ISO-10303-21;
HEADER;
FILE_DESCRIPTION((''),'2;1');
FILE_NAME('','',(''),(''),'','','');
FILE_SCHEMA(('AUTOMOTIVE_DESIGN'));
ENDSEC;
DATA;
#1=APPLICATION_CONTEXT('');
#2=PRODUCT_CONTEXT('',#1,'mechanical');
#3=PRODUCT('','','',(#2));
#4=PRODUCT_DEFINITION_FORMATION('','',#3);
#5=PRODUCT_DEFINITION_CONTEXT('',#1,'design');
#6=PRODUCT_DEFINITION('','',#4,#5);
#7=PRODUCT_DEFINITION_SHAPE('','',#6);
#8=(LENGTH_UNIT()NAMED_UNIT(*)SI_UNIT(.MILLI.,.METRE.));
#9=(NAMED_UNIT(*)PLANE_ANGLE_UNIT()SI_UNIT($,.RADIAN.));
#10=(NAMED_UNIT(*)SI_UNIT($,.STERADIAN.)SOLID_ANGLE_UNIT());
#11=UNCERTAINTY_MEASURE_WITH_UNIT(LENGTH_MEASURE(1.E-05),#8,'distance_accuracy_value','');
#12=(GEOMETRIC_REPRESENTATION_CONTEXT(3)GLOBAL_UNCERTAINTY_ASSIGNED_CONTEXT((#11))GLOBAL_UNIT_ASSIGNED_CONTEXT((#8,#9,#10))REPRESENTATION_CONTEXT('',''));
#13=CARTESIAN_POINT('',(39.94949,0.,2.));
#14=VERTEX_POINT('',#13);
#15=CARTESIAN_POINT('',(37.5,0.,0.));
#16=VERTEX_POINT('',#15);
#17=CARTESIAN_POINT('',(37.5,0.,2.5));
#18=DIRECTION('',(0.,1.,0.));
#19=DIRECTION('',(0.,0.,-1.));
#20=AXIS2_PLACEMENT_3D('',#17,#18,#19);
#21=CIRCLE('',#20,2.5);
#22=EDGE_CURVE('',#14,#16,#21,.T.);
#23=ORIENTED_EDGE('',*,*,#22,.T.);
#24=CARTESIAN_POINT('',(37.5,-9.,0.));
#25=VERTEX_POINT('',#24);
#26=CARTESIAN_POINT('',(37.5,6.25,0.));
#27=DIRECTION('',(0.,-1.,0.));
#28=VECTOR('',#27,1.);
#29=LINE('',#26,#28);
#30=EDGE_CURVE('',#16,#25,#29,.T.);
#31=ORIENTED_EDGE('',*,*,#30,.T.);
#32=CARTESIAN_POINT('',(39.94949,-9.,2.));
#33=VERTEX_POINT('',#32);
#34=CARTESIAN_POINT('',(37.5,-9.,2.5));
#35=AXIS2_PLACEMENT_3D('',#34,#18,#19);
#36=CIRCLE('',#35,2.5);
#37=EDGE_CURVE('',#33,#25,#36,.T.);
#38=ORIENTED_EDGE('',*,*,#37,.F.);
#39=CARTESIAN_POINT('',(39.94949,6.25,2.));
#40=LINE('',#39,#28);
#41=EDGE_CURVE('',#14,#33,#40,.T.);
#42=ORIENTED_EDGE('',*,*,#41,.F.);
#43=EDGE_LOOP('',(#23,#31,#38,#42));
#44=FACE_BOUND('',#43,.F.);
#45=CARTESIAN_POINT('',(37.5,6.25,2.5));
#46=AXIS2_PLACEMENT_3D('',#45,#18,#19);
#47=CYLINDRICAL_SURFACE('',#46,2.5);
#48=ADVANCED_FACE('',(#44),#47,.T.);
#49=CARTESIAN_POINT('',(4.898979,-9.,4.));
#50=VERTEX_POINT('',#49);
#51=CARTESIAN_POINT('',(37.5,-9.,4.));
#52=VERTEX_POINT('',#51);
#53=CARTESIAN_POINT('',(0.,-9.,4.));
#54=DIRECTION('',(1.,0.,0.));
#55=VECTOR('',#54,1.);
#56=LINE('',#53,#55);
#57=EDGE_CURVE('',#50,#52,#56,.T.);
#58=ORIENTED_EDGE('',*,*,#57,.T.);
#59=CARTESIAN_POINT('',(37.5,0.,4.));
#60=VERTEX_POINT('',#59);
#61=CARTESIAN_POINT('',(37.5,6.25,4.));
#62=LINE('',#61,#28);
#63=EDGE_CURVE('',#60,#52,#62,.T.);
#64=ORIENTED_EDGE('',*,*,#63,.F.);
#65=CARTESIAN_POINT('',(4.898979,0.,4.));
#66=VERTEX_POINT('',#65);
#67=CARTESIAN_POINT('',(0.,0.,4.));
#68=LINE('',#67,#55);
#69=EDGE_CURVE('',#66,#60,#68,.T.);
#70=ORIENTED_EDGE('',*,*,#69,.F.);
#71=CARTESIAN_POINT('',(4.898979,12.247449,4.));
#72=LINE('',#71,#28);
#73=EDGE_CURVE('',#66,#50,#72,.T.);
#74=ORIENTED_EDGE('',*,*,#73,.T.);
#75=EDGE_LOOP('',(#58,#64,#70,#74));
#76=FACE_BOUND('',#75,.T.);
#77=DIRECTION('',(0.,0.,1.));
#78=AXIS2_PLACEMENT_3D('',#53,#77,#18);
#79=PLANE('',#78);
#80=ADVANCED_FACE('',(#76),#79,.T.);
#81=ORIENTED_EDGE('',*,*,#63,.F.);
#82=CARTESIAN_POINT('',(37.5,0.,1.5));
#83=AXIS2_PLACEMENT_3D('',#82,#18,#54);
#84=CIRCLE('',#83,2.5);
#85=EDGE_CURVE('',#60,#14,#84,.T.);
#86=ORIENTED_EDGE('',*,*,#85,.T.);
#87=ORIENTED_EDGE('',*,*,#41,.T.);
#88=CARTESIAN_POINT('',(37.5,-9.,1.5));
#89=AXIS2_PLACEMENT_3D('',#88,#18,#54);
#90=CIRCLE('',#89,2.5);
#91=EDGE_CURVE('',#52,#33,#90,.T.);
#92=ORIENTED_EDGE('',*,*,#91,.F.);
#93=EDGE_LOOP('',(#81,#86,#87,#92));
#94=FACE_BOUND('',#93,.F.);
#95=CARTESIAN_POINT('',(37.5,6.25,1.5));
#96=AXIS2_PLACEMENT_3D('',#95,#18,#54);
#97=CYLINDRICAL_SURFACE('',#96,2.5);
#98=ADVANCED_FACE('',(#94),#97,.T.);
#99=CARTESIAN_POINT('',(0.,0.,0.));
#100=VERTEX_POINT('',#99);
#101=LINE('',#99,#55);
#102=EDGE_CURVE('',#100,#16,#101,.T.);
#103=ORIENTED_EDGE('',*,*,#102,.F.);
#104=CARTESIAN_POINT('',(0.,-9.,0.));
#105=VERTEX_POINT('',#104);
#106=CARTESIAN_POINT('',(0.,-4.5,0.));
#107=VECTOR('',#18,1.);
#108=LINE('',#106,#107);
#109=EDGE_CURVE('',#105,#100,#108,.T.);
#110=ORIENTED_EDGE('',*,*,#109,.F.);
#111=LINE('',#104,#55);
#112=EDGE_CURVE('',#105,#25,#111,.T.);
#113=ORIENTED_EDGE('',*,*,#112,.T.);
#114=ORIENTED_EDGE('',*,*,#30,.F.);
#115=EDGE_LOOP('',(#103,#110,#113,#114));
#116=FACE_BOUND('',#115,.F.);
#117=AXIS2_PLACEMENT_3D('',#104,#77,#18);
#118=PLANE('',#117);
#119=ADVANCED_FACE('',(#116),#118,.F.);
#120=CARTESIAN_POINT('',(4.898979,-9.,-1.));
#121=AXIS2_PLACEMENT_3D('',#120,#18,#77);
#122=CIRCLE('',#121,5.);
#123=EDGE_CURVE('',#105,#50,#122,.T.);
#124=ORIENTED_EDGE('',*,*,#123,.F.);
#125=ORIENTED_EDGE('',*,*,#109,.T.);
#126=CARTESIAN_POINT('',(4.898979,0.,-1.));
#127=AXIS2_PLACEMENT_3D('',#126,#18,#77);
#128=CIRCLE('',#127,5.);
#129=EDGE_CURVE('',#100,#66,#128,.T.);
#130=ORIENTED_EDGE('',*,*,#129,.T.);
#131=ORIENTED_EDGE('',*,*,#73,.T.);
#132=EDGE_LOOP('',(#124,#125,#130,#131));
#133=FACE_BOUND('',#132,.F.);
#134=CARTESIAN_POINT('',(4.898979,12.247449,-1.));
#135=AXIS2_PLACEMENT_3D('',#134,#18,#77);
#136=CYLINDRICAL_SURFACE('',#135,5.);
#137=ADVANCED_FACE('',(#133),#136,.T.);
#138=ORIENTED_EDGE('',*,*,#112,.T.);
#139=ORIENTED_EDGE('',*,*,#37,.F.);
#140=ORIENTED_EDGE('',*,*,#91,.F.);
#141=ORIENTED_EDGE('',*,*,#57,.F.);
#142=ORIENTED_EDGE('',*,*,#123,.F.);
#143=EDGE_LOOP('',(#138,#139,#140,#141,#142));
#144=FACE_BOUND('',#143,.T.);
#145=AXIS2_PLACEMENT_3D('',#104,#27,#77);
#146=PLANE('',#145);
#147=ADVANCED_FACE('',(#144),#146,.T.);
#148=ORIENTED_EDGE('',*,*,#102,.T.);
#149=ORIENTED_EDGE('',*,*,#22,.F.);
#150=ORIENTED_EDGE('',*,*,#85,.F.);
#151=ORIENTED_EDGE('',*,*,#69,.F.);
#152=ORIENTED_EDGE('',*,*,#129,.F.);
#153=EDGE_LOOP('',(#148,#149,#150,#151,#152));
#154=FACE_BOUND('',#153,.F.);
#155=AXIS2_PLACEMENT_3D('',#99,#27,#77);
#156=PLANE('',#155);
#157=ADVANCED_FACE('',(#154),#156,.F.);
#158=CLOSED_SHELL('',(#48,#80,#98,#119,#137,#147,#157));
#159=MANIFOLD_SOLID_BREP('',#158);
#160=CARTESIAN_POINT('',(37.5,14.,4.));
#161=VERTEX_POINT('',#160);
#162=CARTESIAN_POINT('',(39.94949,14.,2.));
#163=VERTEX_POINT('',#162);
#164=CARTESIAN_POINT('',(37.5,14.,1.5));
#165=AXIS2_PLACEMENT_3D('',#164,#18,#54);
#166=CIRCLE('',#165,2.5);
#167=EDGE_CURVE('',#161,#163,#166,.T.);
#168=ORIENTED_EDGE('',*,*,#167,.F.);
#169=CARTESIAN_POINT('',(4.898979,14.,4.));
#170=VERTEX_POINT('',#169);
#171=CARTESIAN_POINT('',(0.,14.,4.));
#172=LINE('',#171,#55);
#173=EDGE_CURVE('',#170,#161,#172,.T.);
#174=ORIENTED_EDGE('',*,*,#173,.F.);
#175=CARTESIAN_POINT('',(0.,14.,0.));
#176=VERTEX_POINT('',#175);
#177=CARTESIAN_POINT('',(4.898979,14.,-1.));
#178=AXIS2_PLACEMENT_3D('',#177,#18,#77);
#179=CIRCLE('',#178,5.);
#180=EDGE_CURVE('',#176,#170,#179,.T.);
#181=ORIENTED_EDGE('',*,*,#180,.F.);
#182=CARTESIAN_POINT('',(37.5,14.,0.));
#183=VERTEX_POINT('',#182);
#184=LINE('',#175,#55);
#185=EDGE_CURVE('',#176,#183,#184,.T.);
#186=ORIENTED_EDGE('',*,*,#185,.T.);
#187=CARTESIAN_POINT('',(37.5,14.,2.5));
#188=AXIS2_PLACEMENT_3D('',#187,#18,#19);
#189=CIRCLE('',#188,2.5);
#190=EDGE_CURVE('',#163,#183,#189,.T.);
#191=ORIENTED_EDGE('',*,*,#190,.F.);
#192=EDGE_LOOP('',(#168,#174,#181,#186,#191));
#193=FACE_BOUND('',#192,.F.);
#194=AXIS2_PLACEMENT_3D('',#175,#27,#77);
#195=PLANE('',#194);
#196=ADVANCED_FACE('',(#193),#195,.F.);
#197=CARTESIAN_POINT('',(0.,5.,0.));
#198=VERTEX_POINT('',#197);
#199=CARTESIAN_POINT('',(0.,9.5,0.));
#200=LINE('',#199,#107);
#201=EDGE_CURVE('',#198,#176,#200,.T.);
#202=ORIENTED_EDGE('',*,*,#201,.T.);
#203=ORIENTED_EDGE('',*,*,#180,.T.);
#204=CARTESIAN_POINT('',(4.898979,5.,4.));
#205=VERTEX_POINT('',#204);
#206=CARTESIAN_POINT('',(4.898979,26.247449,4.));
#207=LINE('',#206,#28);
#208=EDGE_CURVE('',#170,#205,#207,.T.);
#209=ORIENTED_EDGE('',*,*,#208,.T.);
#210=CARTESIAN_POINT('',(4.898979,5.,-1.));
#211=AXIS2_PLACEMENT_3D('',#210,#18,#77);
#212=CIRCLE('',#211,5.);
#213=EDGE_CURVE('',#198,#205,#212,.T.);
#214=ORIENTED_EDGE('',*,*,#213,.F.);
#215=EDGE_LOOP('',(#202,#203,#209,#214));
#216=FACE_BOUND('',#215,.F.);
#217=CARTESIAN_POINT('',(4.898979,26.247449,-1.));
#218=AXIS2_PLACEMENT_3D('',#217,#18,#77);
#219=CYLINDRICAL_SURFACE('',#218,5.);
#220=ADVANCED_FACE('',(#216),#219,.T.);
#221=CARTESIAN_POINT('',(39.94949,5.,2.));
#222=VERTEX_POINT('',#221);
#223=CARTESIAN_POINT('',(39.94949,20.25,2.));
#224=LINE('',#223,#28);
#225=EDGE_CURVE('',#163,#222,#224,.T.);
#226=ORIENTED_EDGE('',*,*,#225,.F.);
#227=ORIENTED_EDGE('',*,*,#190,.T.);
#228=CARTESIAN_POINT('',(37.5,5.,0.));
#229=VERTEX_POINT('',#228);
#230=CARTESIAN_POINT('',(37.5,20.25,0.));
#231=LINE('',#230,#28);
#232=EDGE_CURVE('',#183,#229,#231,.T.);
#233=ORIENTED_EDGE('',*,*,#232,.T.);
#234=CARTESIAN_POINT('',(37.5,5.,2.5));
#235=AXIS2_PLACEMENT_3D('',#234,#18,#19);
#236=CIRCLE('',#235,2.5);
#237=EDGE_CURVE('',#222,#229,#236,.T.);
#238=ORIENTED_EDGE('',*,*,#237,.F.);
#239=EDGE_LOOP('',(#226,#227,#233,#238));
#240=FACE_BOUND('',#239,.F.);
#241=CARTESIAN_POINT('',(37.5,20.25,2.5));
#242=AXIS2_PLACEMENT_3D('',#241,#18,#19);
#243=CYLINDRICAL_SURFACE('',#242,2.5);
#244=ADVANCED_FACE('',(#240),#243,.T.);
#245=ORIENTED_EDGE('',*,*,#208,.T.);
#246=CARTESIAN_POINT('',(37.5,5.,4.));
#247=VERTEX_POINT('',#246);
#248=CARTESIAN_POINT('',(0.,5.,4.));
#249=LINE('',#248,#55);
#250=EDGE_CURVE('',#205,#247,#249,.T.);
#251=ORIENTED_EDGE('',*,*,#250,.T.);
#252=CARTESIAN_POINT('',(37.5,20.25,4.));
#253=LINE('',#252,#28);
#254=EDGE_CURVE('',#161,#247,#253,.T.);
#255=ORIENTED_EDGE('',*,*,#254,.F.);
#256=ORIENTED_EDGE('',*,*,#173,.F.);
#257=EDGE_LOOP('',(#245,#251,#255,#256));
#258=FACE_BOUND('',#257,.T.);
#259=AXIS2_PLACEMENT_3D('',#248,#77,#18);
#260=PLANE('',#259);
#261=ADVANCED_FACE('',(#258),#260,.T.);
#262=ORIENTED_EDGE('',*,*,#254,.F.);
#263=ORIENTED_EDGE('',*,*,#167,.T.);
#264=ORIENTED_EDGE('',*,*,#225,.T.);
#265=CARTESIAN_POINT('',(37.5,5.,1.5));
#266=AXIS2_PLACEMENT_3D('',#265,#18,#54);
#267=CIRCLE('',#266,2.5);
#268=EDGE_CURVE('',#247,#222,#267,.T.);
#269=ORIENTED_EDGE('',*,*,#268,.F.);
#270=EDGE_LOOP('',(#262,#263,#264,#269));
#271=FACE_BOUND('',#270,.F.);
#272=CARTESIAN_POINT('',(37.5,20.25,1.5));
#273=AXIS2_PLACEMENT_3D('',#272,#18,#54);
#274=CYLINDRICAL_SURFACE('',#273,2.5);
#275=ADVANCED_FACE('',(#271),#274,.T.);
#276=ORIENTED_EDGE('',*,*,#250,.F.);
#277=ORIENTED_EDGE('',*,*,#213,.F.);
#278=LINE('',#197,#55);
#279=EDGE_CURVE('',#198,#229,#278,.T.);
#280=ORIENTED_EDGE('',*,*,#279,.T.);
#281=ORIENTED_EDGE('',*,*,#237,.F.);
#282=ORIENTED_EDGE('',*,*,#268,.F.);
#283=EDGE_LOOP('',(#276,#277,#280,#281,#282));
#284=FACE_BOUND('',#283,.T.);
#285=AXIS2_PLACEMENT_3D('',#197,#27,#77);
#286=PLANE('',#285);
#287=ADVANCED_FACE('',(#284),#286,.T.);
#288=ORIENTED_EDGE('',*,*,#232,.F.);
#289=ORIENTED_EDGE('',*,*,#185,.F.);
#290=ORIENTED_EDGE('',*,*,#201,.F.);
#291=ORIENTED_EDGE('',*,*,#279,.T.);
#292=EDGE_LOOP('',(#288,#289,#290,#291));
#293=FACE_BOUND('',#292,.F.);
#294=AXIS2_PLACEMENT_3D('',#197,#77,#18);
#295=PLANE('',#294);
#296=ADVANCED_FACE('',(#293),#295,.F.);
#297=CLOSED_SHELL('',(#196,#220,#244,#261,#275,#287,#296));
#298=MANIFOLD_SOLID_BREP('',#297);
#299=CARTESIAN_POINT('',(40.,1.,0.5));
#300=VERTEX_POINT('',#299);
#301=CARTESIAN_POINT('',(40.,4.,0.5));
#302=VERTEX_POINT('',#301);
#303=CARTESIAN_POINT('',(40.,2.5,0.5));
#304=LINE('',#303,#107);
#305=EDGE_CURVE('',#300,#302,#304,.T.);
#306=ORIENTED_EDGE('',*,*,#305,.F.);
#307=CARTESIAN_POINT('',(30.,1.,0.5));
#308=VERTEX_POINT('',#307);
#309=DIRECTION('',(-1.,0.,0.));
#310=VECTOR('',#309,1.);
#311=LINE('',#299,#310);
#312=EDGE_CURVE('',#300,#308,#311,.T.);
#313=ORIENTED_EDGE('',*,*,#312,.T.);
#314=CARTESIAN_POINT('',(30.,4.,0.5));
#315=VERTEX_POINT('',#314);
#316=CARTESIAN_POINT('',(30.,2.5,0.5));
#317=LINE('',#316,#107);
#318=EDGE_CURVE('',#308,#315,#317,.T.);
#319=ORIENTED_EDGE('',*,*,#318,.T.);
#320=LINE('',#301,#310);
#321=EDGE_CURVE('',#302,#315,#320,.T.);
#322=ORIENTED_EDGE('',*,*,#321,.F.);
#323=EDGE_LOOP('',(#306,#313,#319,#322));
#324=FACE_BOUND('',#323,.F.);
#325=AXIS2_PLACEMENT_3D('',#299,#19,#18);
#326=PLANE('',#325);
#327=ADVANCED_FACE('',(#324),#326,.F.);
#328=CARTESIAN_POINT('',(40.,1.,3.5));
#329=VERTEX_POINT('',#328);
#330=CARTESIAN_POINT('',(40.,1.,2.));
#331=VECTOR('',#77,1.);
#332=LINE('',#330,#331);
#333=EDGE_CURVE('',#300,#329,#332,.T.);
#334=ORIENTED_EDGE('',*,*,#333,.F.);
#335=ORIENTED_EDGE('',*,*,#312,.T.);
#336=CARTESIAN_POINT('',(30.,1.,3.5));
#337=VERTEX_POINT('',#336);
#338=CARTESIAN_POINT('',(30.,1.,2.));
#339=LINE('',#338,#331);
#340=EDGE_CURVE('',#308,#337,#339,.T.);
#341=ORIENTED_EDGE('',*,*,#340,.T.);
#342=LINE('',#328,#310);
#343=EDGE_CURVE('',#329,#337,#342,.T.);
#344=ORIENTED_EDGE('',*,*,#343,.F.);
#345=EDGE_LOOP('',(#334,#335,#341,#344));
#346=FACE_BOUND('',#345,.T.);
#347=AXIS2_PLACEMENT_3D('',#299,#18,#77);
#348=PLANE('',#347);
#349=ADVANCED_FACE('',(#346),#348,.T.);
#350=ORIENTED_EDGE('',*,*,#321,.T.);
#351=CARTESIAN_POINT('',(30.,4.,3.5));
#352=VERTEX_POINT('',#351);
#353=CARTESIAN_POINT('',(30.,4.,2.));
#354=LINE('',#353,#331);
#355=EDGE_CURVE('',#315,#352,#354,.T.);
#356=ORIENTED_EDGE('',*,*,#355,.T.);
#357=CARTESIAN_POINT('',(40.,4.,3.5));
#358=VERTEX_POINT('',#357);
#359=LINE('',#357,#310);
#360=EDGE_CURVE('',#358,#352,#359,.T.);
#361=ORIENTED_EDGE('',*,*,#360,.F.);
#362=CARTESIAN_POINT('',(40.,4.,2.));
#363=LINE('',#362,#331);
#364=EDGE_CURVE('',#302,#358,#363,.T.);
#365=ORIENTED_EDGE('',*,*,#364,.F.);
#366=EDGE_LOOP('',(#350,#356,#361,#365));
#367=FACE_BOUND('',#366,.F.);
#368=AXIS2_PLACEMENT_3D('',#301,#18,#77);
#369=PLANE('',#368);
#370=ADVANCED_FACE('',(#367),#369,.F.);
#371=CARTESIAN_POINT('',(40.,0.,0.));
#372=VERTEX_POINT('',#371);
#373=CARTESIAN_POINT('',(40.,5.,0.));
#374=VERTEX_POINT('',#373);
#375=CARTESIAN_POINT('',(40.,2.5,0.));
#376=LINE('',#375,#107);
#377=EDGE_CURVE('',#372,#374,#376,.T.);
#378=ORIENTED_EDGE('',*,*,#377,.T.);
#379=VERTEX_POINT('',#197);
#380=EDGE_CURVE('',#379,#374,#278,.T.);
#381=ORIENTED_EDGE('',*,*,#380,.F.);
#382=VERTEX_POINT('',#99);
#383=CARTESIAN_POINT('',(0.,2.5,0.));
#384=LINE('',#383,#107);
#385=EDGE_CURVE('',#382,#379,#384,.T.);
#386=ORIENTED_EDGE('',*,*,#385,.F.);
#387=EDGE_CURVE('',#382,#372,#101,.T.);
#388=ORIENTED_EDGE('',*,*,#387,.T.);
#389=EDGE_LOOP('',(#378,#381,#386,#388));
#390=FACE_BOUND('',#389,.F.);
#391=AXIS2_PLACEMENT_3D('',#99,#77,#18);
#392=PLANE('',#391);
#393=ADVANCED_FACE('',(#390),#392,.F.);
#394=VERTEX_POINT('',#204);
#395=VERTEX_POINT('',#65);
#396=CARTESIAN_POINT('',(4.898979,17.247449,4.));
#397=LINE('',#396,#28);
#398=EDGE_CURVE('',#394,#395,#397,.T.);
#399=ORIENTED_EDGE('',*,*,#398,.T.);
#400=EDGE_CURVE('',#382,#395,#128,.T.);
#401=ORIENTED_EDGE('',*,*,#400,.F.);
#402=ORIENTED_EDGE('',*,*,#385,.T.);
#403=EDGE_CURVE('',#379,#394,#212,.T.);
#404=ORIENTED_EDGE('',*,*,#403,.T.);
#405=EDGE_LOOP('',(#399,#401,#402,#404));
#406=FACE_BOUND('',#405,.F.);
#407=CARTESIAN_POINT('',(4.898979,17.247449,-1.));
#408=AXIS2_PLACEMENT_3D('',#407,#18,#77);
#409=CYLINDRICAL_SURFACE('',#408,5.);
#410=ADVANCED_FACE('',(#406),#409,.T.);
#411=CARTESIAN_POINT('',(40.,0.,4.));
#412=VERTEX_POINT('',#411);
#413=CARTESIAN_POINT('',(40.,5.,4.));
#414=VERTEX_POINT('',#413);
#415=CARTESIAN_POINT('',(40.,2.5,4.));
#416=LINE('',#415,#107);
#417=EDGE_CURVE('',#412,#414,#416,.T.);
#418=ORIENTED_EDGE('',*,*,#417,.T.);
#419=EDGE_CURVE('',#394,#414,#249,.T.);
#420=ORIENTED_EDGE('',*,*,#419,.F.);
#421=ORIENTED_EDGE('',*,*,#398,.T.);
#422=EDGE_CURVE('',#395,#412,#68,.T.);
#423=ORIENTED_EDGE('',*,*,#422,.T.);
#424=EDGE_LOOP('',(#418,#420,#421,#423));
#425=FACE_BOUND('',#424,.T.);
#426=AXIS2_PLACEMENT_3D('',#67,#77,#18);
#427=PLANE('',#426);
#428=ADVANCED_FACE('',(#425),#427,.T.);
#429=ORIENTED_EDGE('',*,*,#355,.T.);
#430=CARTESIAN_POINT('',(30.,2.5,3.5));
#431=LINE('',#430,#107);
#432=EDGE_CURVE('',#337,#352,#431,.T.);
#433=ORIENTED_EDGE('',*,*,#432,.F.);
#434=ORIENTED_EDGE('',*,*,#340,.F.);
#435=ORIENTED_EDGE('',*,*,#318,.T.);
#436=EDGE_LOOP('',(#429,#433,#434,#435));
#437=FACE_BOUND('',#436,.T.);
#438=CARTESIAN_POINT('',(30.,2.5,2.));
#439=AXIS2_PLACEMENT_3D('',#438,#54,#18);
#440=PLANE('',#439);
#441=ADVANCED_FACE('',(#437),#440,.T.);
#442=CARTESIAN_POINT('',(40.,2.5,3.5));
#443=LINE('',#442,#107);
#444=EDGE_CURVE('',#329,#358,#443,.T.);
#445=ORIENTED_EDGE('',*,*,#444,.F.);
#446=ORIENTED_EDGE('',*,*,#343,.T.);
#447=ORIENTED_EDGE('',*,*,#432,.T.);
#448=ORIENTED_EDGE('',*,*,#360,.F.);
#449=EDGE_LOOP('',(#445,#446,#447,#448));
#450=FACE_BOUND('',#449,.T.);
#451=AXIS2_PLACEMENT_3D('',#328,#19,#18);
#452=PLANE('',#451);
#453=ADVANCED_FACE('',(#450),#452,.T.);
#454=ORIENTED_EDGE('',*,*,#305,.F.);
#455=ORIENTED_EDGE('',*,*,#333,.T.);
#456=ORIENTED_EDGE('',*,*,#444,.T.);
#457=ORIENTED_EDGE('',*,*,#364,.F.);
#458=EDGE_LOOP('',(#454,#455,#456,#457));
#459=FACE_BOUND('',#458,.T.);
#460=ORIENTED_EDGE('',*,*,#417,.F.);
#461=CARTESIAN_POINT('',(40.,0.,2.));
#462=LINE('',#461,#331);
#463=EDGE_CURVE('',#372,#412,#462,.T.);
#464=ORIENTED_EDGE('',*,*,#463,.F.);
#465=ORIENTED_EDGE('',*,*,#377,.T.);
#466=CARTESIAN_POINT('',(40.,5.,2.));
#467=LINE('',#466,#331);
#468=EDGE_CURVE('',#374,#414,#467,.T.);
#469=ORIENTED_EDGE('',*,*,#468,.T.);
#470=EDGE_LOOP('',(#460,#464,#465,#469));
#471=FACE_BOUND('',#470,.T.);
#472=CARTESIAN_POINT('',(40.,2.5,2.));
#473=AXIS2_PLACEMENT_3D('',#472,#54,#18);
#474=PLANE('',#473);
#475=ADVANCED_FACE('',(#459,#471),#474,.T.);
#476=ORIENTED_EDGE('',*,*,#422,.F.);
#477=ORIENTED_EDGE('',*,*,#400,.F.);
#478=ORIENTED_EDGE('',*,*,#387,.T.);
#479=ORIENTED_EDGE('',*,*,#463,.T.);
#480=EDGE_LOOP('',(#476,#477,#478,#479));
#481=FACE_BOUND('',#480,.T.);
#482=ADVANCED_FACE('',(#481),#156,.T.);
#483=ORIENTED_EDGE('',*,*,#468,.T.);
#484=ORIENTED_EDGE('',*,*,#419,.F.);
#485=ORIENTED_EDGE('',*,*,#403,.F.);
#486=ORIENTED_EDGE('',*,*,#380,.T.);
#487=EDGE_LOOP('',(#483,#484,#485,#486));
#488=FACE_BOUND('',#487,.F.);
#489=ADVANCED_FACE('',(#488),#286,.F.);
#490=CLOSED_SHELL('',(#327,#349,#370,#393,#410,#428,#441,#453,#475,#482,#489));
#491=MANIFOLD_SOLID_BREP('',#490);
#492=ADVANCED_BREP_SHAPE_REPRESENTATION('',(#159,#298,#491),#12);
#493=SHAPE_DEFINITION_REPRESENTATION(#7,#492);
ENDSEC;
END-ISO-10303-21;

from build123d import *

# Parameters (mm, degrees)
F0_W          = 9
F0_H          = 4
F1_DEPTH      = 40
F0_W_2        = 5
F2_DEPTH      = 40
F3_W          = 3
F3_H          = 3
F4_DEPTH      = 10
F5_T1_DEPTH   = 33.4948974279
F5_2_T1_DEPTH = 33.4948974279
F5_3_T1_DEPTH = 29.4948974279
F6_T1_DEPTH   = 21.5
F6_2_T1_DEPTH = 21.5


# Not quite as in the source:
# - a fillet or chamfer that OpenCascade refuses, or shapes differently, is made with other operations: its cross-section is extruded or revolved along the edge and cut away or added


with BuildPart() as f1:
    # F0 (on Right) → F1 (new body)
    with BuildSketch(Plane.YZ):
        with Locations((-4.5, 2)):
            Rectangle(F0_W, F0_H)
    extrude(amount=F1_DEPTH)

    # F5: fillet of radius 5 on 1 edges, made by hand

    # F5_s2 → F5_t1 (cut)
    with BuildSketch(Plane.XZ.offset(-12.2474487139)):
        with BuildLine():
            ThreePointArc((4.8989794856, 4), (1.7367018254, 2.8729833462), (0, 0))
            Line((0, 0), (0, 4))
            Line((0, 4), (4.8989794856, 4))
        make_face()
    extrude(amount=F5_T1_DEPTH, mode=Mode.SUBTRACT)

    # F6: fillet of radius 2.5 on 2 edges, made by hand

    # F6_s2 → F6_t1 (cut)
    with BuildSketch(Plane.XZ.offset(-6.25)):
        with BuildLine():
            ThreePointArc((40, 1.5), (39.267766953, 3.267766953), (37.5, 4))
            Line((37.5, 4), (40, 4))
            Line((40, 4), (40, 1.5))
        make_face()
        with BuildLine():
            ThreePointArc((37.5, 0), (39.267766953, 0.732233047), (40, 2.5))
            Line((40, 2.5), (40, 0))
            Line((40, 0), (37.5, 0))
        make_face()
    extrude(amount=F6_T1_DEPTH, mode=Mode.SUBTRACT)


with BuildPart() as f1b:
    # F0 (on Right) → F1, piece 2 (new body)
    with BuildSketch(Plane.YZ):
        with Locations((9.5, 2)):
            Rectangle(F0_W, F0_H)
    extrude(amount=F1_DEPTH)

    # F5#2: fillet of radius 5 on 1 edges, made by hand

    # F5_2_s2 → F5_2_t1 (cut)
    with BuildSketch(Plane.XZ.offset(-26.2474487139)):
        with BuildLine():
            ThreePointArc((4.8989794856, 4), (1.7367018254, 2.8729833462), (0, 0))
            Line((0, 0), (0, 4))
            Line((0, 4), (4.8989794856, 4))
        make_face()
    extrude(amount=F5_2_T1_DEPTH, mode=Mode.SUBTRACT)

    # F6#2: fillet of radius 2.5 on 2 edges, made by hand

    # F6_2_s2 → F6_2_t1 (cut)
    with BuildSketch(Plane.XZ.offset(-20.25)):
        with BuildLine():
            ThreePointArc((40, 1.5), (39.267766953, 3.267766953), (37.5, 4))
            Line((37.5, 4), (40, 4))
            Line((40, 4), (40, 1.5))
        make_face()
        with BuildLine():
            ThreePointArc((37.5, 0), (39.267766953, 0.732233047), (40, 2.5))
            Line((40, 2.5), (40, 0))
            Line((40, 0), (37.5, 0))
        make_face()
    extrude(amount=F6_2_T1_DEPTH, mode=Mode.SUBTRACT)


with BuildPart() as f2:
    # F0 (on Right) → F2 (new body)
    with BuildSketch(Plane.YZ):
        with Locations((2.5, 2)):
            Rectangle(F0_W_2, F0_H)
    extrude(amount=F2_DEPTH)

    # F3 (on face) → F4 (cut)
    with BuildSketch(Plane.YZ.offset(40)):
        with Locations((2.5, 2)):
            Rectangle(F3_W, F3_H)
    extrude(amount=-F4_DEPTH, mode=Mode.SUBTRACT)

    # F5#3: fillet of radius 5 on 1 edges, made by hand

    # F5_3_s2 → F5_3_t1 (cut)
    with BuildSketch(Plane.XZ.offset(-17.2474487139)):
        with BuildLine():
            ThreePointArc((4.8989794856, 4), (1.7367018254, 2.8729833462), (0, 0))
            Line((0, 0), (0, 4))
            Line((0, 4), (4.8989794856, 4))
        make_face()
    extrude(amount=F5_3_T1_DEPTH, mode=Mode.SUBTRACT)


solid = Compound([f1.part, f1b.part, f2.part])
